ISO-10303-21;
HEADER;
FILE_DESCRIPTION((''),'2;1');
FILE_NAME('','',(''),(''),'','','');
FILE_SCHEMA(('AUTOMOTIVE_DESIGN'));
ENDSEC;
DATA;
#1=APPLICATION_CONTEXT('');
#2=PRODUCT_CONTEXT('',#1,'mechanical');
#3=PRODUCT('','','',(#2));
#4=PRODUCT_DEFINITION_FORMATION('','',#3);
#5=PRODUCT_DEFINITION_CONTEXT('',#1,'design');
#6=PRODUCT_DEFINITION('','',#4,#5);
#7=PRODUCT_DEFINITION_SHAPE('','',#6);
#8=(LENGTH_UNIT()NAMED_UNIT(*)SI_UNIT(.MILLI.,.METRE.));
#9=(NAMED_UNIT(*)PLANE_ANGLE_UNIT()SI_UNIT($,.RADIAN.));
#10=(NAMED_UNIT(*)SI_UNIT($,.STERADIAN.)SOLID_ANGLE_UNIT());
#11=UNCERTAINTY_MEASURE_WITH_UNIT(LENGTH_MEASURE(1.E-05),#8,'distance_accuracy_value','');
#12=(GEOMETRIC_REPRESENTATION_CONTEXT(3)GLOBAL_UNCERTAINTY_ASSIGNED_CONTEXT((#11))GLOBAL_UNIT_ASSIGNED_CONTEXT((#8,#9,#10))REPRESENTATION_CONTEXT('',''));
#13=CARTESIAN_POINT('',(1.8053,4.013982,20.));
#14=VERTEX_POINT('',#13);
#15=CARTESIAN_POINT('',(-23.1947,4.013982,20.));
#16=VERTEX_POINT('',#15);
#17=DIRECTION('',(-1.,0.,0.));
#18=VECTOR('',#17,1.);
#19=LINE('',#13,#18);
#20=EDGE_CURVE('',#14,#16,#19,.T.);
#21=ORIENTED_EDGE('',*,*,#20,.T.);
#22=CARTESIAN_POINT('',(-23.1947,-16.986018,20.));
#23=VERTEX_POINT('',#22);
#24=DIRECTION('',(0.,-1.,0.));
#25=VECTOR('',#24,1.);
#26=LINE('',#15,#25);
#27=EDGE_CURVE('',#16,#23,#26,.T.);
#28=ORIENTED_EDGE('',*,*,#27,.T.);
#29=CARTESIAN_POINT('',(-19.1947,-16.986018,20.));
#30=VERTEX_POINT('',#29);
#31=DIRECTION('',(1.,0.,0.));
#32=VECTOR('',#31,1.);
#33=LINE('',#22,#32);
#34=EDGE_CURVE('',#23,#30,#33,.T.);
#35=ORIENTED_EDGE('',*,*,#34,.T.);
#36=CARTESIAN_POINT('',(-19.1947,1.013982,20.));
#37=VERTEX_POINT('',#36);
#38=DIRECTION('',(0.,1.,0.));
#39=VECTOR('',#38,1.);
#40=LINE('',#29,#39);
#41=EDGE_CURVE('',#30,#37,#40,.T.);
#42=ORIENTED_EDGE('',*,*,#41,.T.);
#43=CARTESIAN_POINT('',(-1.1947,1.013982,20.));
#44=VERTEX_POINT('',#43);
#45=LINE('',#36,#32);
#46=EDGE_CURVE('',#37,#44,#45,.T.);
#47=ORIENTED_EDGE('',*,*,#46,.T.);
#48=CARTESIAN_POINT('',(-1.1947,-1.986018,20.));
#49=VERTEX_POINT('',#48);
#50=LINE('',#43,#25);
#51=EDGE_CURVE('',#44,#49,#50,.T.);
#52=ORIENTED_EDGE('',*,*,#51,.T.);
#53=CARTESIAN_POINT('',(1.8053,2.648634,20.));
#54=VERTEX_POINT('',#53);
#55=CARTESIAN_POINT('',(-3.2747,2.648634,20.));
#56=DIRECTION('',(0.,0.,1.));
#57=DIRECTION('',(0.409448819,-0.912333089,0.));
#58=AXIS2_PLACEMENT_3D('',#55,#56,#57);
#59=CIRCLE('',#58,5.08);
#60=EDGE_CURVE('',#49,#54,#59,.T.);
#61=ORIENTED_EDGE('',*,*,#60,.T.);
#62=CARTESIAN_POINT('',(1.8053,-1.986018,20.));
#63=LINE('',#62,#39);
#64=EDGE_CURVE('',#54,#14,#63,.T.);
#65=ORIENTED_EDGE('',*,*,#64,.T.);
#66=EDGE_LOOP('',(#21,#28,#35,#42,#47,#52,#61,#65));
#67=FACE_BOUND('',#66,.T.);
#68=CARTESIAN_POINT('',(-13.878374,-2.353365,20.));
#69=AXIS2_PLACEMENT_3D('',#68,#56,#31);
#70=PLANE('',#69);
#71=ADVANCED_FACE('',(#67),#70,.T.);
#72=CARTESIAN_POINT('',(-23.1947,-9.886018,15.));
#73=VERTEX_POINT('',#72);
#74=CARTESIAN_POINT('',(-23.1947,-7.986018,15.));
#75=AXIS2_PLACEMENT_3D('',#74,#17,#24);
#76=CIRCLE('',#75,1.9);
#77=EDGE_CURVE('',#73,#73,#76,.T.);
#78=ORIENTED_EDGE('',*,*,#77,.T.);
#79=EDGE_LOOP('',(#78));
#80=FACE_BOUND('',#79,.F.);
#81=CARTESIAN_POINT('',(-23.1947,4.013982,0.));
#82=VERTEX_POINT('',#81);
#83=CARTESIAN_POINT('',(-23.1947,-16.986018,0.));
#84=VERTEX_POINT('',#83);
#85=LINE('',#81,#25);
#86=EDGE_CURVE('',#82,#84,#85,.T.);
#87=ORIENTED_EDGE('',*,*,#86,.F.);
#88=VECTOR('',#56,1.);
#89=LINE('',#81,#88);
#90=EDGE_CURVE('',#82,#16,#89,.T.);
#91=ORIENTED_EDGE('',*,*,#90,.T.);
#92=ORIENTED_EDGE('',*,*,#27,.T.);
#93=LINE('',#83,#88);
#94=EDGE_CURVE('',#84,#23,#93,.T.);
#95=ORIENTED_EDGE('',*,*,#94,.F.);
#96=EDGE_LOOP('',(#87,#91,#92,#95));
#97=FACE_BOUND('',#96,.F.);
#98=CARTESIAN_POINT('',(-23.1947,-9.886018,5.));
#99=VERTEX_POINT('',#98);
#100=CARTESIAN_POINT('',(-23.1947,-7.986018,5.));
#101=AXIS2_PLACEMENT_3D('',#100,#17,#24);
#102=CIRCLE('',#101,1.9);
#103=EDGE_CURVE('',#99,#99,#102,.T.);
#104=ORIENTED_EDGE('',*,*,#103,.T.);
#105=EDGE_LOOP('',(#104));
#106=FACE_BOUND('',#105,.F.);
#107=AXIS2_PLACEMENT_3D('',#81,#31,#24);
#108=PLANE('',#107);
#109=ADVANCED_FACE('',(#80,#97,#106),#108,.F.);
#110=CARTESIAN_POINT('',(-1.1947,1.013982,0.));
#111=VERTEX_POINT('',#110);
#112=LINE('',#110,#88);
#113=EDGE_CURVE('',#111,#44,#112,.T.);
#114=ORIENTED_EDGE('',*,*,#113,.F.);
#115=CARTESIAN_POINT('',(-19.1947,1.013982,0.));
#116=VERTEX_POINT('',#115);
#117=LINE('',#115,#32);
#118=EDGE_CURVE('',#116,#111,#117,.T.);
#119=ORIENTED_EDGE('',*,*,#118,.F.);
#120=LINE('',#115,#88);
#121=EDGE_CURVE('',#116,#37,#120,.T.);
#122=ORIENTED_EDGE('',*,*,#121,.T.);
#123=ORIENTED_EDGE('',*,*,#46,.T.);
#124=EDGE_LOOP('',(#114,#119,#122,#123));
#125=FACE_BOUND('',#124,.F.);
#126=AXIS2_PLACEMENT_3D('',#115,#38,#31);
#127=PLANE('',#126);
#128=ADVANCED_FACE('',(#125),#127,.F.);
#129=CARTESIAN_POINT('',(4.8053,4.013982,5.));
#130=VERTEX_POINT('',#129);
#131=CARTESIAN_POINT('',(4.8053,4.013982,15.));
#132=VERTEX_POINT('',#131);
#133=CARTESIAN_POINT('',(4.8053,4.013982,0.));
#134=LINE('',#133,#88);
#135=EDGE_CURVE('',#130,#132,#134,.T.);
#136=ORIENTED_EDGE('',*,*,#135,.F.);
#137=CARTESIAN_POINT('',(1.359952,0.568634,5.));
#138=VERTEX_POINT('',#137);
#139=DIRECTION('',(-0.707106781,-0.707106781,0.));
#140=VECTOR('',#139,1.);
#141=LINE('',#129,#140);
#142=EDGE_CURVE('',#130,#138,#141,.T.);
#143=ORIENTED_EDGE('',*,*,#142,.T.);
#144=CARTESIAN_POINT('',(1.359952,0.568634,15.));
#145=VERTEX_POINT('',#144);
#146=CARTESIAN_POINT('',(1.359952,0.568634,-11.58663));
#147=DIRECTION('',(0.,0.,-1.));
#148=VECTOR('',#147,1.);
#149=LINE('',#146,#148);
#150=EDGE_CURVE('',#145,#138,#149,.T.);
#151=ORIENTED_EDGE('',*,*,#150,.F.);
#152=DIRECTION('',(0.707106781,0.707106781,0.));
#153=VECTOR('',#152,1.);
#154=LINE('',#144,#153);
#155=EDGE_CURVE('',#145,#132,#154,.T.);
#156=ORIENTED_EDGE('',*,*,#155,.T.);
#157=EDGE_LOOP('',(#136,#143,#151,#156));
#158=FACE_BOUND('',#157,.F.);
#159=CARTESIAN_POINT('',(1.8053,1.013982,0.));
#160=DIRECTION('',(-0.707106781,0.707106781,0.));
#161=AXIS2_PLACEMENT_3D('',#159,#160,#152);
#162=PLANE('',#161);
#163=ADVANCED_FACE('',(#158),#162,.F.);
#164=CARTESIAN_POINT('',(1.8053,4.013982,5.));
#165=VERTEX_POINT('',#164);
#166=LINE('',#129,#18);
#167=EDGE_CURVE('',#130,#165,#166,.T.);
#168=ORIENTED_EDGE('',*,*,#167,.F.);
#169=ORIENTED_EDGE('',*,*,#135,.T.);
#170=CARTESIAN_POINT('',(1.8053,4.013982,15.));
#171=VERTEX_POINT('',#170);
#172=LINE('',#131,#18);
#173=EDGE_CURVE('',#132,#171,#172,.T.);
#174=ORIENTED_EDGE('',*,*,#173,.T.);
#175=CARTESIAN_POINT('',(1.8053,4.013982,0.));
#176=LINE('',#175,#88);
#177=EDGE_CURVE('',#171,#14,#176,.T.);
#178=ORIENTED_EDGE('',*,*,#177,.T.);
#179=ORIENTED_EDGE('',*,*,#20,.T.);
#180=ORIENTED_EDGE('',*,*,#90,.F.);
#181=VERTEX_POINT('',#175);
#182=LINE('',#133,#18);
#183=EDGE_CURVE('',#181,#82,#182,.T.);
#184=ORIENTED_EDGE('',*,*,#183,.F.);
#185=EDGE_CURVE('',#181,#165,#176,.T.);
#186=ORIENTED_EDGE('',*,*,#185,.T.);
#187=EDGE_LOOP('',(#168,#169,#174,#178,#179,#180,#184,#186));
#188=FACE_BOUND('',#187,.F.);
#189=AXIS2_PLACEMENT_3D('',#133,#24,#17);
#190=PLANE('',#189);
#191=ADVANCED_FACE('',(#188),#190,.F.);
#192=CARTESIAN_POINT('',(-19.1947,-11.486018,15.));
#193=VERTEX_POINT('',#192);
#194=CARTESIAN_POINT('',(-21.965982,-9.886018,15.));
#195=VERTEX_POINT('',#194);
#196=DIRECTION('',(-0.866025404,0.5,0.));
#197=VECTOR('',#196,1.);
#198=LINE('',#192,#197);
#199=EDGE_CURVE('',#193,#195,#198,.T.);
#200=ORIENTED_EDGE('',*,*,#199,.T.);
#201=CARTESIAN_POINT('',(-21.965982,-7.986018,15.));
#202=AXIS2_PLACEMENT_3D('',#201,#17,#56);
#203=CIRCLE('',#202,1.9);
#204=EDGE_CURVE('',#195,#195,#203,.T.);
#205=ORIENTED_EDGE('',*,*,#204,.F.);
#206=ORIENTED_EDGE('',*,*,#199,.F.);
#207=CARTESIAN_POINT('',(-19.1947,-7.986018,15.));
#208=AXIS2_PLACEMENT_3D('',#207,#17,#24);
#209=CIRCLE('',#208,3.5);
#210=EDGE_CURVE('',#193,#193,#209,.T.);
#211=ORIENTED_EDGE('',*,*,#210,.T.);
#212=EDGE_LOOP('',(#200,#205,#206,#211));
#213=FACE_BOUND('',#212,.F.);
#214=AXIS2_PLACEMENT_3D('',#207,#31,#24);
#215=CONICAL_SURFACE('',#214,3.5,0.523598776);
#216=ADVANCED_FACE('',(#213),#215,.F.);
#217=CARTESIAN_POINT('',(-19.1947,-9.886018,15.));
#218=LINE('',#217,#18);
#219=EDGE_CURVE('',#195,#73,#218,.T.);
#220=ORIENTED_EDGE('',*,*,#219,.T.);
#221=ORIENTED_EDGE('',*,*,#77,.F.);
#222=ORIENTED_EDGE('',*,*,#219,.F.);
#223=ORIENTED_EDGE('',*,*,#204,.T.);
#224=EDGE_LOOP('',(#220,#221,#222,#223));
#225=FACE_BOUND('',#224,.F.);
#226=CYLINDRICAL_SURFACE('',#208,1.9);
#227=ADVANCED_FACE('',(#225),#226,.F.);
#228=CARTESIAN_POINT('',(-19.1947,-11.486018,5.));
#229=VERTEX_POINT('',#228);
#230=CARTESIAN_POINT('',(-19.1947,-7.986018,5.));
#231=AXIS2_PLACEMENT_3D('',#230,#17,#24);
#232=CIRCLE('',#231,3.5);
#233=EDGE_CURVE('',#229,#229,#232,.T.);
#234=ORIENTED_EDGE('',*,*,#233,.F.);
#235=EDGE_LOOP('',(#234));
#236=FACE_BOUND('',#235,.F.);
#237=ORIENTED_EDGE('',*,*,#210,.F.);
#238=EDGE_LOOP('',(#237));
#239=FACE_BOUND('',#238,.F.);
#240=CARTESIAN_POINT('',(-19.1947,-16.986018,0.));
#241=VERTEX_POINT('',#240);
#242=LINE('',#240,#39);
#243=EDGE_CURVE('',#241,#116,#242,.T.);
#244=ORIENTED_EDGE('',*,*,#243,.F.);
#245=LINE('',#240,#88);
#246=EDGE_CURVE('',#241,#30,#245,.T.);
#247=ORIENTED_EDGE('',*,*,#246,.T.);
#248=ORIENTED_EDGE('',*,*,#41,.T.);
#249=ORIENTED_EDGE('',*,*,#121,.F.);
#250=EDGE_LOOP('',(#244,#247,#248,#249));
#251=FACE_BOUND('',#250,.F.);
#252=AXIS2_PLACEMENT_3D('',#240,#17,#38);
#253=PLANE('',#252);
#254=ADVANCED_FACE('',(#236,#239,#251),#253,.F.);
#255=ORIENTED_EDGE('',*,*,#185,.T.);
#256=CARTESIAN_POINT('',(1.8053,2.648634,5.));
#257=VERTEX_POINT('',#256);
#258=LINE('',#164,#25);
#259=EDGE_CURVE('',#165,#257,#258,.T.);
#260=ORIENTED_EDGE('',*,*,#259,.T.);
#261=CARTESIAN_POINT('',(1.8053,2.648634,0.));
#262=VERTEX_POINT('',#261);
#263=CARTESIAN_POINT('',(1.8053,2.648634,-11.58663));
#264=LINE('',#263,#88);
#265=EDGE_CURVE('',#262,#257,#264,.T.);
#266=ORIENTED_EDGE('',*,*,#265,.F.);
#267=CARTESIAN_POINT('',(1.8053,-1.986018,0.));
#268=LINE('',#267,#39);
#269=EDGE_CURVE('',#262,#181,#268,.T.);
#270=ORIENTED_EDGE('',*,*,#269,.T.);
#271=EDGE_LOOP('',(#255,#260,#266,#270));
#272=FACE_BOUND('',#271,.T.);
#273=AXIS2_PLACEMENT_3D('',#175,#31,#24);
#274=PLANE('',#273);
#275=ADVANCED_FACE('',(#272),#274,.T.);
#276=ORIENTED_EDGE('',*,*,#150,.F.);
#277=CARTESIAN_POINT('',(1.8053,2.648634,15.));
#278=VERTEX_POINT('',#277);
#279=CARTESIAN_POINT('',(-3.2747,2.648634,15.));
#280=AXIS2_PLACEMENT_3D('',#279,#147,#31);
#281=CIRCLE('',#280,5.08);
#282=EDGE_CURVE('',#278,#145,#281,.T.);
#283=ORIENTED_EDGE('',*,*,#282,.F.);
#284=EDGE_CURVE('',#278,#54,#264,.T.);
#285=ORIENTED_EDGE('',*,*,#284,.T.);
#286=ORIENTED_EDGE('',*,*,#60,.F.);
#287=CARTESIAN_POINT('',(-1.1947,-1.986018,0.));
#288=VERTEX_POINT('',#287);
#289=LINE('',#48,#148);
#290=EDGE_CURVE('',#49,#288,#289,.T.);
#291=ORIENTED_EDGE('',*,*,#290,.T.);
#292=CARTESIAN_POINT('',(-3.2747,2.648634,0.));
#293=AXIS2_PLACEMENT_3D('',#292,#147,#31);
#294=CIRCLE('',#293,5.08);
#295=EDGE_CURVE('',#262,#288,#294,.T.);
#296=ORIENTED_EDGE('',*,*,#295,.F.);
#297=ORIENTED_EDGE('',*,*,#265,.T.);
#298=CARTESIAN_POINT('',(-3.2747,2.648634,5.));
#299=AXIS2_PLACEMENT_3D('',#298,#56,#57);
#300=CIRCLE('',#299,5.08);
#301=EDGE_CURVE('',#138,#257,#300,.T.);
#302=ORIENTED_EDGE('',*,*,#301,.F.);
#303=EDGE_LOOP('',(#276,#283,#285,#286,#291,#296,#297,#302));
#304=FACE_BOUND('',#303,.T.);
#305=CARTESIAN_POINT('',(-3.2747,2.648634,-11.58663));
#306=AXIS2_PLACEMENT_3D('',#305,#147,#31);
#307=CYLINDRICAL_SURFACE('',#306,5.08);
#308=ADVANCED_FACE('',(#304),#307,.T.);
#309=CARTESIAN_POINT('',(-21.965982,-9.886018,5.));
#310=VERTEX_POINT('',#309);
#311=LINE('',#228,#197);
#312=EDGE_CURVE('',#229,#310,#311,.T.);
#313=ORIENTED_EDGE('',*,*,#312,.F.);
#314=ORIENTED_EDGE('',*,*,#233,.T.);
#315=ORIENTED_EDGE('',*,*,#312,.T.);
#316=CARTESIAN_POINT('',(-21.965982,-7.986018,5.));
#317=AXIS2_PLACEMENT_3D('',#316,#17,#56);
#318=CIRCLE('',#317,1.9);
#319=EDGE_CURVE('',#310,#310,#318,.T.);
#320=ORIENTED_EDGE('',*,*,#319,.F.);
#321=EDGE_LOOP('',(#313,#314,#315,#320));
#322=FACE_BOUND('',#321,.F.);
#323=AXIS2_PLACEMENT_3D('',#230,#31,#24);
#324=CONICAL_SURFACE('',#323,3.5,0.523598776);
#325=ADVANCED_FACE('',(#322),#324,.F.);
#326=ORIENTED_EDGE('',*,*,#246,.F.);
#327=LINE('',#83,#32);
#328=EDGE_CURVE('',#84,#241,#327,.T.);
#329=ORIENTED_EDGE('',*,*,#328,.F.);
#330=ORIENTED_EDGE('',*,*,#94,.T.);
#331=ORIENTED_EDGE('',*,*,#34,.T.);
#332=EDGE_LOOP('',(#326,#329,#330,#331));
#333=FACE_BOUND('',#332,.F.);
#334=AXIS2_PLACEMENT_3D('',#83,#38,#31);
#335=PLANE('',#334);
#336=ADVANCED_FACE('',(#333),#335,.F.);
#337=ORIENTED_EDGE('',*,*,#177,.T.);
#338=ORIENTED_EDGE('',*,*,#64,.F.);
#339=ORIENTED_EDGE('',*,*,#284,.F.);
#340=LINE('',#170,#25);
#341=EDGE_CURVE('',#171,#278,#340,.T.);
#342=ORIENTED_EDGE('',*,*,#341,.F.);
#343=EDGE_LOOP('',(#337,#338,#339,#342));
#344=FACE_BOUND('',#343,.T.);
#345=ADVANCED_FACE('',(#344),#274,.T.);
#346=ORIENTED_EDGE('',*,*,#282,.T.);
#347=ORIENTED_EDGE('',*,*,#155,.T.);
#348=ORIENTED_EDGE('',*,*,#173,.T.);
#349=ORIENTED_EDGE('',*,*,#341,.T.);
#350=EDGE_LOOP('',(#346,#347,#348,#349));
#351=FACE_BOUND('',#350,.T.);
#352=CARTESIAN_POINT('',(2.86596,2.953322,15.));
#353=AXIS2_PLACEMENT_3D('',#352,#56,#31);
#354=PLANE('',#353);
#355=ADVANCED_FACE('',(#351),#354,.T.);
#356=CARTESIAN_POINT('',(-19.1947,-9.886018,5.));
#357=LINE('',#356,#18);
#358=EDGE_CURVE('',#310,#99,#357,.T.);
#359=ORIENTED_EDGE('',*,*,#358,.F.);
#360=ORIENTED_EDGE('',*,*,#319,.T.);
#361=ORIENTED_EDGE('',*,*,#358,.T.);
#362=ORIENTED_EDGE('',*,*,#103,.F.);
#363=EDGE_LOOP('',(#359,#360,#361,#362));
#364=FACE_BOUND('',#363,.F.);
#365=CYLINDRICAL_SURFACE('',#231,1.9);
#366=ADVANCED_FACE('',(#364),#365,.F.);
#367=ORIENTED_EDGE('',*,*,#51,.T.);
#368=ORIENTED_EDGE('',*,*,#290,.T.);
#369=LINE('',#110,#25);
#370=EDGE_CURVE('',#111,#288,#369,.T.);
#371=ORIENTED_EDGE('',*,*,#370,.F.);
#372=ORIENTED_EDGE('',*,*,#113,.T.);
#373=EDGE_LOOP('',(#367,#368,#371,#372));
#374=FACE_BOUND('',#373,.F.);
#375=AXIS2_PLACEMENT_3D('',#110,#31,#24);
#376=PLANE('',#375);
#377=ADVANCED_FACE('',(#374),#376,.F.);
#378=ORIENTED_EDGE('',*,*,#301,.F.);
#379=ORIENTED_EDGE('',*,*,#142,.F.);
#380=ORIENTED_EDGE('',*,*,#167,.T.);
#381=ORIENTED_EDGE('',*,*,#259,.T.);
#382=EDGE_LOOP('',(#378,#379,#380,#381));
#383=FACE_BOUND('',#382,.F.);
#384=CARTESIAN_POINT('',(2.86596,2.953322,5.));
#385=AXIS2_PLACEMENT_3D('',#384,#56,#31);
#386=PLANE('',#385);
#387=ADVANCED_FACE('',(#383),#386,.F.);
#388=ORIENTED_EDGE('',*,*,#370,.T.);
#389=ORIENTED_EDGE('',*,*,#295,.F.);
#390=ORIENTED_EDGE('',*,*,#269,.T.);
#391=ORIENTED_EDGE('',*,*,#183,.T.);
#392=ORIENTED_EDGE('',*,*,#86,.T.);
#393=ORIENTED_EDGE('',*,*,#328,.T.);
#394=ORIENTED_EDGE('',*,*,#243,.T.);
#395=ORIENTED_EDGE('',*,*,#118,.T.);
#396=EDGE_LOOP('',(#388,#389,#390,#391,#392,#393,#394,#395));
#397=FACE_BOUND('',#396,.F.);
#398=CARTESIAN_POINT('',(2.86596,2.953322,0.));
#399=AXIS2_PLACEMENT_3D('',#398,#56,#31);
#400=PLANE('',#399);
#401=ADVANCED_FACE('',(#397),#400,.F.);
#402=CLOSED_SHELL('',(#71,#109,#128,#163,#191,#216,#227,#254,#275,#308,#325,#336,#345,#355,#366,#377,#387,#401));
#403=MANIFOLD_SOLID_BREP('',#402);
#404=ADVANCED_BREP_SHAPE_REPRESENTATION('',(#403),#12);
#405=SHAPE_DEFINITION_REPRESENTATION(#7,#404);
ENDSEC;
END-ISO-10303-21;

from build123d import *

# Parameters (mm, degrees)
F1_DEPTH       = 20
F2_DEPTH       = 15
F3_DEPTH       = 5
F5_D           = 3.8
F5_DEPTH       = 20
F5_CSINK_D     = 7
F5_CSINK_ANGLE = 60
F5_TIP         = 1.1416351762
F6_T4_DEPTH    = 43.1732604525
F6_T10_DEPTH   = 43.1732604525
F6_T16_DEPTH   = 43.1732604525
F6_T23_DEPTH   = 43.1732604525
F6_T29_DEPTH   = 43.1732604525


# Not quite as in the source:
# - a fillet or chamfer that OpenCascade refuses, or shapes differently, is made with other operations: its cross-section is extruded or revolved along the edge and cut away or added


with BuildPart() as f1:
    # F0 (on Top) → F1 (new body)
    with BuildSketch(Plane.XY):
        Polygon((-23.1947004795, 4.0139819533), (-23.1947004795, -16.9860180467), (-19.1947004795, -16.9860180467), (-19.1947004795, 1.0139819533), (-1.1947004795, 1.0139819533), (-1.1947004795, -1.9860180467), (1.8052995205, -1.9860180467), (1.8052995205, 1.0139819533), (1.8052995205, 4.0139819533), align=None)
    extrude(amount=F1_DEPTH)

    # F0 (on Top) → F2 (join)
    with BuildSketch(Plane.XY):
        Polygon((4.8052995205, 4.0139819533), (1.8052995205, 4.0139819533), (1.8052995205, 1.0139819533), align=None)
    extrude(amount=F2_DEPTH)

    # F0 (on Top) → F3 (cut)
    with BuildSketch(Plane.XY):
        Polygon((4.8052995205, 4.0139819533), (1.8052995205, 4.0139819533), (1.8052995205, 1.0139819533), align=None)
    extrude(amount=F3_DEPTH, mode=Mode.SUBTRACT)

    # F5
    with Locations(Plane.YZ.offset(-19.1947004795)):
        with Locations((-7.9860180467, 15), (-7.9860180467, 5)):
            CounterSinkHole(F5_D / 2, F5_CSINK_D / 2, depth=F5_DEPTH, counter_sink_angle=F5_CSINK_ANGLE)
            with Locations((0, 0, -(F5_DEPTH + F5_TIP / 2))):  # 118° drill point
                Cone(0, F5_D / 2, F5_TIP, mode=Mode.SUBTRACT)

    # F6: fillet of radius 5.08 on 1 edges, made by hand


with BuildPart() as f6_tool2:
    # F6_s3 → F6_t4 (new body)
    with BuildSketch(Plane.XY.offset(-11.5866302263)):
        with BuildLine():
            ThreePointArc((1.8052995205, 2.6486340438), (0.9898510796, -0.1118007046), (-1.1947004795, -1.9860180467))
            Line((-1.1947004795, -1.9860180467), (-1.1531004795, -2.0787110885))
            ThreePointArc((-1.1531004795, -2.0787110885), (0.3052995205, -2.0876180467), (1.8052995205, -2.0876180467))
            Line((1.8052995205, -2.0876180467), (1.9068995205, -1.9860180467))
            Line((1.9068995205, -1.9860180467), (1.9068995205, 2.6486340438))
            Line((1.9068995205, 2.6486340438), (1.8052995205, 2.6486340438))
        make_face()
    extrude(amount=F6_T4_DEPTH)

    split(bisect_by=Plane(origin=(0.3956587836, -0.3956587836, 0), x_dir=(0, 0, 1), z_dir=(-0.7071067812, 0.7071067812, 0)), keep=Keep.TOP)

    split(bisect_by=Plane.XY.offset(5), keep=Keep.BOTTOM)


with BuildPart() as f1_1:
    add(f1.part)

    # F6_t1: cut F6_tool2
    add(f6_tool2.part, mode=Mode.SUBTRACT)


with BuildPart() as f6_tool8:
    # F6_s9 → F6_t10 (new body)
    with BuildSketch(Plane.XY.offset(-11.5866302263)):
        with BuildLine():
            ThreePointArc((1.8052995205, 2.6486340438), (0.9898510796, -0.1118007046), (-1.1947004795, -1.9860180467))
            Line((-1.1947004795, -1.9860180467), (-1.1531004795, -2.0787110885))
            ThreePointArc((-1.1531004795, -2.0787110885), (0.3052995205, -2.0876180467), (1.8052995205, -2.0876180467))
            Line((1.8052995205, -2.0876180467), (1.9068995205, -1.9860180467))
            Line((1.9068995205, -1.9860180467), (1.9068995205, 2.6486340438))
            Line((1.9068995205, 2.6486340438), (1.8052995205, 2.6486340438))
        make_face()
    extrude(amount=F6_T10_DEPTH)

    split(bisect_by=Plane(origin=(0.3956587836, -0.3956587836, 0), x_dir=(0, 0, 1), z_dir=(0.7071067812, -0.7071067812, 0)), keep=Keep.TOP)

    split(bisect_by=Plane.XY.offset(5), keep=Keep.BOTTOM)


with BuildPart() as f1_2:
    add(f1_1.part)

    # F6_t7: cut F6_tool8
    add(f6_tool8.part, mode=Mode.SUBTRACT)


with BuildPart() as f6_tool14:
    # F6_s15 → F6_t16 (new body)
    with BuildSketch(Plane.XY.offset(-11.5866302263)):
        with BuildLine():
            ThreePointArc((1.8052995205, 2.6486340438), (0.9898510796, -0.1118007046), (-1.1947004795, -1.9860180467))
            Line((-1.1947004795, -1.9860180467), (-1.1531004795, -2.0787110885))
            ThreePointArc((-1.1531004795, -2.0787110885), (0.3052995205, -2.0876180467), (1.8052995205, -2.0876180467))
            Line((1.8052995205, -2.0876180467), (1.9068995205, -1.9860180467))
            Line((1.9068995205, -1.9860180467), (1.9068995205, 2.6486340438))
            Line((1.9068995205, 2.6486340438), (1.8052995205, 2.6486340438))
        make_face()
    extrude(amount=F6_T16_DEPTH)

    split(bisect_by=Plane.XY.offset(15), keep=Keep.BOTTOM)

    split(bisect_by=Plane(origin=(0.3956587836, -0.3956587836, 0), x_dir=(0, 0, 1), z_dir=(0.7071067812, -0.7071067812, 0)), keep=Keep.TOP)

    split(bisect_by=Plane.XY.offset(5), keep=Keep.TOP)


with BuildPart() as f1_3:
    add(f1_2.part)

    # F6_t13: cut F6_tool14
    add(f6_tool14.part, mode=Mode.SUBTRACT)


with BuildPart() as f6_tool21:
    # F6_s22 → F6_t23 (new body)
    with BuildSketch(Plane.XY.offset(-11.5866302263)):
        with BuildLine():
            ThreePointArc((1.8052995205, 2.6486340438), (0.9898510796, -0.1118007046), (-1.1947004795, -1.9860180467))
            Line((-1.1947004795, -1.9860180467), (-1.1531004795, -2.0787110885))
            ThreePointArc((-1.1531004795, -2.0787110885), (0.3052995205, -2.0876180467), (1.8052995205, -2.0876180467))
            Line((1.8052995205, -2.0876180467), (1.9068995205, -1.9860180467))
            Line((1.9068995205, -1.9860180467), (1.9068995205, 2.6486340438))
            Line((1.9068995205, 2.6486340438), (1.8052995205, 2.6486340438))
        make_face()
    extrude(amount=F6_T23_DEPTH)

    split(bisect_by=Plane.XY.offset(15), keep=Keep.TOP)

    split(bisect_by=Plane(origin=(0.3956587836, -0.3956587836, 0), x_dir=(0, 0, 1), z_dir=(-0.7071067812, 0.7071067812, 0)), keep=Keep.TOP)


with BuildPart() as f1_4:
    add(f1_3.part)

    # F6_t20: cut F6_tool21
    add(f6_tool21.part, mode=Mode.SUBTRACT)


with BuildPart() as f6_tool27:
    # F6_s28 → F6_t29 (new body)
    with BuildSketch(Plane.XY.offset(-11.5866302263)):
        with BuildLine():
            ThreePointArc((1.8052995205, 2.6486340438), (0.9898510796, -0.1118007046), (-1.1947004795, -1.9860180467))
            Line((-1.1947004795, -1.9860180467), (-1.1531004795, -2.0787110885))
            ThreePointArc((-1.1531004795, -2.0787110885), (0.3052995205, -2.0876180467), (1.8052995205, -2.0876180467))
            Line((1.8052995205, -2.0876180467), (1.9068995205, -1.9860180467))
            Line((1.9068995205, -1.9860180467), (1.9068995205, 2.6486340438))
            Line((1.9068995205, 2.6486340438), (1.8052995205, 2.6486340438))
        make_face()
    extrude(amount=F6_T29_DEPTH)

    split(bisect_by=Plane.XY.offset(15), keep=Keep.TOP)

    split(bisect_by=Plane(origin=(0.3956587836, -0.3956587836, 0), x_dir=(0, 0, 1), z_dir=(0.7071067812, -0.7071067812, 0)), keep=Keep.TOP)


with BuildPart() as f1_5:
    add(f1_4.part)

    # F6_t26: cut F6_tool27
    add(f6_tool27.part, mode=Mode.SUBTRACT)


solid = f1_5.part
